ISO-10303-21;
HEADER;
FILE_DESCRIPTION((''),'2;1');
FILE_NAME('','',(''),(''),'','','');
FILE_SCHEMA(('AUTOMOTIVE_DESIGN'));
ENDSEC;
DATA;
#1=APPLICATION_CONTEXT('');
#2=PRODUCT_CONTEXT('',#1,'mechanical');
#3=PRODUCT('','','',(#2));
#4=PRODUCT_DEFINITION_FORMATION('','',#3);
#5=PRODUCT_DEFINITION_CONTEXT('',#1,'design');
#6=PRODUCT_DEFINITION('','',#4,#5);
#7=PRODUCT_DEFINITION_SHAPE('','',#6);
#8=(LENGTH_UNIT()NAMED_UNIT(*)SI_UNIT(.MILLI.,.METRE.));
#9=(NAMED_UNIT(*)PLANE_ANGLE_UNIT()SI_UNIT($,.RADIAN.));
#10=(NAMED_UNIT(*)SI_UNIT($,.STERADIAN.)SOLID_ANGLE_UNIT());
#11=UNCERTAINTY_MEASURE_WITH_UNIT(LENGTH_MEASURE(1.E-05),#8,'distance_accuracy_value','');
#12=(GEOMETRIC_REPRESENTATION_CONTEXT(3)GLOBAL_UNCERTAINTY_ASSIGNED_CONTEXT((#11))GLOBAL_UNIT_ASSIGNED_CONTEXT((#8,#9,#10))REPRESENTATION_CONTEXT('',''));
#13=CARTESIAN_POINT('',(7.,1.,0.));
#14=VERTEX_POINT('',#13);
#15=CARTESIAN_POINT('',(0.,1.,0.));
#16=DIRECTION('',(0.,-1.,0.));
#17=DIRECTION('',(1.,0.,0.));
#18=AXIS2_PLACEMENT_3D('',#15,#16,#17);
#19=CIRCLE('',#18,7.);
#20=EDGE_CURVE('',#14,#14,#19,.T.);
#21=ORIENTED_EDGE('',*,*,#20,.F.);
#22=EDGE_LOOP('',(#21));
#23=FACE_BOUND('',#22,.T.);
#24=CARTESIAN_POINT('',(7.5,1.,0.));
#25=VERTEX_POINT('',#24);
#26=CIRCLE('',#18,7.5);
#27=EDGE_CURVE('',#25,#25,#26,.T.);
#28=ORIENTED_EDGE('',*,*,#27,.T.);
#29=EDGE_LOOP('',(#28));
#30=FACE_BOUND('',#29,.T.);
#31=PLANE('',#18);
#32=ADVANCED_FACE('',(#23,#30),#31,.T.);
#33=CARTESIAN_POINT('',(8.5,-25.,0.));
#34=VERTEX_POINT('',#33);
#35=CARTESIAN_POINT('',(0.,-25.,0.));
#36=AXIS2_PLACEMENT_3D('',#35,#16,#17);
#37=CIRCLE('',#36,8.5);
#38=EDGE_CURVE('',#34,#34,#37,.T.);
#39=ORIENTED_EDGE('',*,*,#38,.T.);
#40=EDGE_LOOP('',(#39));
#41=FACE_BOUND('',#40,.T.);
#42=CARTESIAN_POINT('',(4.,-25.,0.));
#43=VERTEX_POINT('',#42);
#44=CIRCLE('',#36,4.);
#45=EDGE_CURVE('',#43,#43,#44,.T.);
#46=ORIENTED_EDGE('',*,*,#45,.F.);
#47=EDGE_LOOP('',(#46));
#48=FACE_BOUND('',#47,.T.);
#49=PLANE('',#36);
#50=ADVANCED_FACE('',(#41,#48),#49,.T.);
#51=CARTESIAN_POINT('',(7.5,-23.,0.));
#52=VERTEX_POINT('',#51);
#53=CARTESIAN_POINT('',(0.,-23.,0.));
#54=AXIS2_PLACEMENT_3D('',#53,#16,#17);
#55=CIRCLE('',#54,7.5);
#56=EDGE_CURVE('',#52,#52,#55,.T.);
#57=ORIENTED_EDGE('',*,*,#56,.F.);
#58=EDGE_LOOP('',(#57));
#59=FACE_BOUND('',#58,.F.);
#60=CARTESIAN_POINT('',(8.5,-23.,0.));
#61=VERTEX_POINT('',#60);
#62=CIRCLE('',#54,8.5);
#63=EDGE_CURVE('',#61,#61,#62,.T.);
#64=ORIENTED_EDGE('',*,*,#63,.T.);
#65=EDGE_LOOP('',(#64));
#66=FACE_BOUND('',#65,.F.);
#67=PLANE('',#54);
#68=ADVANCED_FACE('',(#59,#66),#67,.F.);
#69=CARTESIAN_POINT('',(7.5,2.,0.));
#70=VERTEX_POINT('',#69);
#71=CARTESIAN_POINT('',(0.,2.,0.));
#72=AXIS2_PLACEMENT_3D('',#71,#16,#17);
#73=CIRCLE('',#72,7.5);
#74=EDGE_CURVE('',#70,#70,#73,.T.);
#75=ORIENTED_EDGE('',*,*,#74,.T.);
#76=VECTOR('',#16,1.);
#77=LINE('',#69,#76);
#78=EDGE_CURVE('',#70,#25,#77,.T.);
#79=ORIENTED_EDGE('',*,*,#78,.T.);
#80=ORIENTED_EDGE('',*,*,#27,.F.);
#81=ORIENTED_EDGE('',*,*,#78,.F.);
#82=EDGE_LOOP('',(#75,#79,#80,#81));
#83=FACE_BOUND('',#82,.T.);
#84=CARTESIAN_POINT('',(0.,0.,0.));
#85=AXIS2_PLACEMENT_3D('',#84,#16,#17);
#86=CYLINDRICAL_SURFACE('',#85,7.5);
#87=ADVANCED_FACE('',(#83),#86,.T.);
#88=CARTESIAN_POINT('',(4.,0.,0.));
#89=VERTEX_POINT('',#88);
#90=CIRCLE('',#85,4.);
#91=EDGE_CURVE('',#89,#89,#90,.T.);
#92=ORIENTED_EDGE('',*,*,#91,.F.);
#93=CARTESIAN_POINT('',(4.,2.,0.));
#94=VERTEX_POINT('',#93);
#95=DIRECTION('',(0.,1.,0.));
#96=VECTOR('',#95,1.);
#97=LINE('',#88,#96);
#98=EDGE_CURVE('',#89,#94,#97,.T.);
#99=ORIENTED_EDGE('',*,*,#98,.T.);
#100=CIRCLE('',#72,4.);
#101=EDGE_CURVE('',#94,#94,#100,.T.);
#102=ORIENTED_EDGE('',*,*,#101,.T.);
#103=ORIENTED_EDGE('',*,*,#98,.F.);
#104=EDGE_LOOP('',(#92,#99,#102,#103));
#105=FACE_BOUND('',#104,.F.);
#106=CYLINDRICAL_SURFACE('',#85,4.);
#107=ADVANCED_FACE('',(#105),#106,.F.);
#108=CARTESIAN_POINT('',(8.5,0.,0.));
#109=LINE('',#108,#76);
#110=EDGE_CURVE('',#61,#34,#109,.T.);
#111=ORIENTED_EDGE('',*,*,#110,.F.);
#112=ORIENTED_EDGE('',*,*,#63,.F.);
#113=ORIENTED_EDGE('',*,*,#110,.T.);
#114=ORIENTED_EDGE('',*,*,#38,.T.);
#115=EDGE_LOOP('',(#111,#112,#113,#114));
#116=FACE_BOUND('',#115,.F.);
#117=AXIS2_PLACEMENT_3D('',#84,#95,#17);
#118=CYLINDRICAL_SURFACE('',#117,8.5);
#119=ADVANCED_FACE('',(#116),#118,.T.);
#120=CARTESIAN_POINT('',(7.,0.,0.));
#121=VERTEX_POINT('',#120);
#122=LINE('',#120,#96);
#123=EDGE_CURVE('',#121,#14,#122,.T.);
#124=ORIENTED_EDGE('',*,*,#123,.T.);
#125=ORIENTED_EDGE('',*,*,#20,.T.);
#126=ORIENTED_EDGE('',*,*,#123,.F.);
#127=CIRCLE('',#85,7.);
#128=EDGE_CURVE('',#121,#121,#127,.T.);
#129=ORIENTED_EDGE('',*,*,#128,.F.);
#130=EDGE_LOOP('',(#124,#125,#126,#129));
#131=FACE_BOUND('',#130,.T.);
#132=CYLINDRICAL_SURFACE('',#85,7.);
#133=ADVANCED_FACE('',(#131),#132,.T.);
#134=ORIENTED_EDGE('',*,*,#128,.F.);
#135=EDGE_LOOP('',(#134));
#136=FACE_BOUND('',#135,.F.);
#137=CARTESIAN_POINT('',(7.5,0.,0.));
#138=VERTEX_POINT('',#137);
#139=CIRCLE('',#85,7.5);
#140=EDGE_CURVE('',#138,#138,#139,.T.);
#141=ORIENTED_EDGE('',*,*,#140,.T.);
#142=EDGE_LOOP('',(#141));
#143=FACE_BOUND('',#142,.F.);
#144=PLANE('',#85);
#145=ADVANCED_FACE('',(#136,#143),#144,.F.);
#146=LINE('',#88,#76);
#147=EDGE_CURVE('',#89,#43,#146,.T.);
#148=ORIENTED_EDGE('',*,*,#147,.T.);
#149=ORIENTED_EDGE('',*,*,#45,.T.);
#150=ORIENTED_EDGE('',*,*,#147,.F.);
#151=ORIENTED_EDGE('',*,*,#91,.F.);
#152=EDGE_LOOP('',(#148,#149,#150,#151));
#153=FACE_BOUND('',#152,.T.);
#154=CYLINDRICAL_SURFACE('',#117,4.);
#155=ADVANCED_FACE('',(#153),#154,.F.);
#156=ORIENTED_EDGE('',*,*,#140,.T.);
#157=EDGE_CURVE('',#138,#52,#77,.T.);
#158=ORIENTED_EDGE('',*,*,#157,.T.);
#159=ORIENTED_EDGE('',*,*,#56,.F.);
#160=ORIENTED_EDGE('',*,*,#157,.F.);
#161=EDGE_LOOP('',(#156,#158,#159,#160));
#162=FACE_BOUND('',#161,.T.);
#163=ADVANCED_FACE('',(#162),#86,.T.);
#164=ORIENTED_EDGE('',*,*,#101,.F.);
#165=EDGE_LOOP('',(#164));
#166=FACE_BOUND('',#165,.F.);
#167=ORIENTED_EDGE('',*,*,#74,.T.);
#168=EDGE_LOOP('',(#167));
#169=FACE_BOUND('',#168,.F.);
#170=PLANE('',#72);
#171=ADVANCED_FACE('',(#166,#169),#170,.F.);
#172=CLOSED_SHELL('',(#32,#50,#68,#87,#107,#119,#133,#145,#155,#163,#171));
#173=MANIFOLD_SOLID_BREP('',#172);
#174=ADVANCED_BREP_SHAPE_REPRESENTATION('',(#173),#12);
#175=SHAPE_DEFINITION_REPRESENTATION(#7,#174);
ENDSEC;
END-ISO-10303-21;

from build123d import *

# Parameters (mm, degrees)
F0_R     = 8.5
F0_R_2   = 7.5
F0_R_3   = 7
F0_R_4   = 4
F1_DEPTH = 25
F2_DEPTH = 23
F3_DEPTH = 2
F4_DEPTH = 1


with BuildPart() as f1:
    # F0 (on Front) → F1 (new body)
    with BuildSketch(Plane.XZ):
        Circle(F0_R)
        Circle(F0_R_2, mode=Mode.SUBTRACT)
        Circle(F0_R_2)
        Circle(F0_R_3, mode=Mode.SUBTRACT)
        Circle(F0_R_3)
        Circle(F0_R_4, mode=Mode.SUBTRACT)
    extrude(amount=F1_DEPTH)

    # F0 (on Front) → F2 (cut)
    with BuildSketch(Plane.XZ):
        Circle(F0_R)
        Circle(F0_R_2, mode=Mode.SUBTRACT)
    extrude(amount=F2_DEPTH, mode=Mode.SUBTRACT)

    # F0 (on Front) → F3 (join)
    with BuildSketch(Plane.XZ):
        Circle(F0_R_2)
        Circle(F0_R_3, mode=Mode.SUBTRACT)
        Circle(F0_R_3)
        Circle(F0_R_4, mode=Mode.SUBTRACT)
    extrude(amount=-F3_DEPTH)

    # F0 (on Front) → F4 (cut)
    with BuildSketch(Plane.XZ):
        Circle(F0_R_2)
        Circle(F0_R_3, mode=Mode.SUBTRACT)
    extrude(amount=-F4_DEPTH, mode=Mode.SUBTRACT)


solid = f1.part
